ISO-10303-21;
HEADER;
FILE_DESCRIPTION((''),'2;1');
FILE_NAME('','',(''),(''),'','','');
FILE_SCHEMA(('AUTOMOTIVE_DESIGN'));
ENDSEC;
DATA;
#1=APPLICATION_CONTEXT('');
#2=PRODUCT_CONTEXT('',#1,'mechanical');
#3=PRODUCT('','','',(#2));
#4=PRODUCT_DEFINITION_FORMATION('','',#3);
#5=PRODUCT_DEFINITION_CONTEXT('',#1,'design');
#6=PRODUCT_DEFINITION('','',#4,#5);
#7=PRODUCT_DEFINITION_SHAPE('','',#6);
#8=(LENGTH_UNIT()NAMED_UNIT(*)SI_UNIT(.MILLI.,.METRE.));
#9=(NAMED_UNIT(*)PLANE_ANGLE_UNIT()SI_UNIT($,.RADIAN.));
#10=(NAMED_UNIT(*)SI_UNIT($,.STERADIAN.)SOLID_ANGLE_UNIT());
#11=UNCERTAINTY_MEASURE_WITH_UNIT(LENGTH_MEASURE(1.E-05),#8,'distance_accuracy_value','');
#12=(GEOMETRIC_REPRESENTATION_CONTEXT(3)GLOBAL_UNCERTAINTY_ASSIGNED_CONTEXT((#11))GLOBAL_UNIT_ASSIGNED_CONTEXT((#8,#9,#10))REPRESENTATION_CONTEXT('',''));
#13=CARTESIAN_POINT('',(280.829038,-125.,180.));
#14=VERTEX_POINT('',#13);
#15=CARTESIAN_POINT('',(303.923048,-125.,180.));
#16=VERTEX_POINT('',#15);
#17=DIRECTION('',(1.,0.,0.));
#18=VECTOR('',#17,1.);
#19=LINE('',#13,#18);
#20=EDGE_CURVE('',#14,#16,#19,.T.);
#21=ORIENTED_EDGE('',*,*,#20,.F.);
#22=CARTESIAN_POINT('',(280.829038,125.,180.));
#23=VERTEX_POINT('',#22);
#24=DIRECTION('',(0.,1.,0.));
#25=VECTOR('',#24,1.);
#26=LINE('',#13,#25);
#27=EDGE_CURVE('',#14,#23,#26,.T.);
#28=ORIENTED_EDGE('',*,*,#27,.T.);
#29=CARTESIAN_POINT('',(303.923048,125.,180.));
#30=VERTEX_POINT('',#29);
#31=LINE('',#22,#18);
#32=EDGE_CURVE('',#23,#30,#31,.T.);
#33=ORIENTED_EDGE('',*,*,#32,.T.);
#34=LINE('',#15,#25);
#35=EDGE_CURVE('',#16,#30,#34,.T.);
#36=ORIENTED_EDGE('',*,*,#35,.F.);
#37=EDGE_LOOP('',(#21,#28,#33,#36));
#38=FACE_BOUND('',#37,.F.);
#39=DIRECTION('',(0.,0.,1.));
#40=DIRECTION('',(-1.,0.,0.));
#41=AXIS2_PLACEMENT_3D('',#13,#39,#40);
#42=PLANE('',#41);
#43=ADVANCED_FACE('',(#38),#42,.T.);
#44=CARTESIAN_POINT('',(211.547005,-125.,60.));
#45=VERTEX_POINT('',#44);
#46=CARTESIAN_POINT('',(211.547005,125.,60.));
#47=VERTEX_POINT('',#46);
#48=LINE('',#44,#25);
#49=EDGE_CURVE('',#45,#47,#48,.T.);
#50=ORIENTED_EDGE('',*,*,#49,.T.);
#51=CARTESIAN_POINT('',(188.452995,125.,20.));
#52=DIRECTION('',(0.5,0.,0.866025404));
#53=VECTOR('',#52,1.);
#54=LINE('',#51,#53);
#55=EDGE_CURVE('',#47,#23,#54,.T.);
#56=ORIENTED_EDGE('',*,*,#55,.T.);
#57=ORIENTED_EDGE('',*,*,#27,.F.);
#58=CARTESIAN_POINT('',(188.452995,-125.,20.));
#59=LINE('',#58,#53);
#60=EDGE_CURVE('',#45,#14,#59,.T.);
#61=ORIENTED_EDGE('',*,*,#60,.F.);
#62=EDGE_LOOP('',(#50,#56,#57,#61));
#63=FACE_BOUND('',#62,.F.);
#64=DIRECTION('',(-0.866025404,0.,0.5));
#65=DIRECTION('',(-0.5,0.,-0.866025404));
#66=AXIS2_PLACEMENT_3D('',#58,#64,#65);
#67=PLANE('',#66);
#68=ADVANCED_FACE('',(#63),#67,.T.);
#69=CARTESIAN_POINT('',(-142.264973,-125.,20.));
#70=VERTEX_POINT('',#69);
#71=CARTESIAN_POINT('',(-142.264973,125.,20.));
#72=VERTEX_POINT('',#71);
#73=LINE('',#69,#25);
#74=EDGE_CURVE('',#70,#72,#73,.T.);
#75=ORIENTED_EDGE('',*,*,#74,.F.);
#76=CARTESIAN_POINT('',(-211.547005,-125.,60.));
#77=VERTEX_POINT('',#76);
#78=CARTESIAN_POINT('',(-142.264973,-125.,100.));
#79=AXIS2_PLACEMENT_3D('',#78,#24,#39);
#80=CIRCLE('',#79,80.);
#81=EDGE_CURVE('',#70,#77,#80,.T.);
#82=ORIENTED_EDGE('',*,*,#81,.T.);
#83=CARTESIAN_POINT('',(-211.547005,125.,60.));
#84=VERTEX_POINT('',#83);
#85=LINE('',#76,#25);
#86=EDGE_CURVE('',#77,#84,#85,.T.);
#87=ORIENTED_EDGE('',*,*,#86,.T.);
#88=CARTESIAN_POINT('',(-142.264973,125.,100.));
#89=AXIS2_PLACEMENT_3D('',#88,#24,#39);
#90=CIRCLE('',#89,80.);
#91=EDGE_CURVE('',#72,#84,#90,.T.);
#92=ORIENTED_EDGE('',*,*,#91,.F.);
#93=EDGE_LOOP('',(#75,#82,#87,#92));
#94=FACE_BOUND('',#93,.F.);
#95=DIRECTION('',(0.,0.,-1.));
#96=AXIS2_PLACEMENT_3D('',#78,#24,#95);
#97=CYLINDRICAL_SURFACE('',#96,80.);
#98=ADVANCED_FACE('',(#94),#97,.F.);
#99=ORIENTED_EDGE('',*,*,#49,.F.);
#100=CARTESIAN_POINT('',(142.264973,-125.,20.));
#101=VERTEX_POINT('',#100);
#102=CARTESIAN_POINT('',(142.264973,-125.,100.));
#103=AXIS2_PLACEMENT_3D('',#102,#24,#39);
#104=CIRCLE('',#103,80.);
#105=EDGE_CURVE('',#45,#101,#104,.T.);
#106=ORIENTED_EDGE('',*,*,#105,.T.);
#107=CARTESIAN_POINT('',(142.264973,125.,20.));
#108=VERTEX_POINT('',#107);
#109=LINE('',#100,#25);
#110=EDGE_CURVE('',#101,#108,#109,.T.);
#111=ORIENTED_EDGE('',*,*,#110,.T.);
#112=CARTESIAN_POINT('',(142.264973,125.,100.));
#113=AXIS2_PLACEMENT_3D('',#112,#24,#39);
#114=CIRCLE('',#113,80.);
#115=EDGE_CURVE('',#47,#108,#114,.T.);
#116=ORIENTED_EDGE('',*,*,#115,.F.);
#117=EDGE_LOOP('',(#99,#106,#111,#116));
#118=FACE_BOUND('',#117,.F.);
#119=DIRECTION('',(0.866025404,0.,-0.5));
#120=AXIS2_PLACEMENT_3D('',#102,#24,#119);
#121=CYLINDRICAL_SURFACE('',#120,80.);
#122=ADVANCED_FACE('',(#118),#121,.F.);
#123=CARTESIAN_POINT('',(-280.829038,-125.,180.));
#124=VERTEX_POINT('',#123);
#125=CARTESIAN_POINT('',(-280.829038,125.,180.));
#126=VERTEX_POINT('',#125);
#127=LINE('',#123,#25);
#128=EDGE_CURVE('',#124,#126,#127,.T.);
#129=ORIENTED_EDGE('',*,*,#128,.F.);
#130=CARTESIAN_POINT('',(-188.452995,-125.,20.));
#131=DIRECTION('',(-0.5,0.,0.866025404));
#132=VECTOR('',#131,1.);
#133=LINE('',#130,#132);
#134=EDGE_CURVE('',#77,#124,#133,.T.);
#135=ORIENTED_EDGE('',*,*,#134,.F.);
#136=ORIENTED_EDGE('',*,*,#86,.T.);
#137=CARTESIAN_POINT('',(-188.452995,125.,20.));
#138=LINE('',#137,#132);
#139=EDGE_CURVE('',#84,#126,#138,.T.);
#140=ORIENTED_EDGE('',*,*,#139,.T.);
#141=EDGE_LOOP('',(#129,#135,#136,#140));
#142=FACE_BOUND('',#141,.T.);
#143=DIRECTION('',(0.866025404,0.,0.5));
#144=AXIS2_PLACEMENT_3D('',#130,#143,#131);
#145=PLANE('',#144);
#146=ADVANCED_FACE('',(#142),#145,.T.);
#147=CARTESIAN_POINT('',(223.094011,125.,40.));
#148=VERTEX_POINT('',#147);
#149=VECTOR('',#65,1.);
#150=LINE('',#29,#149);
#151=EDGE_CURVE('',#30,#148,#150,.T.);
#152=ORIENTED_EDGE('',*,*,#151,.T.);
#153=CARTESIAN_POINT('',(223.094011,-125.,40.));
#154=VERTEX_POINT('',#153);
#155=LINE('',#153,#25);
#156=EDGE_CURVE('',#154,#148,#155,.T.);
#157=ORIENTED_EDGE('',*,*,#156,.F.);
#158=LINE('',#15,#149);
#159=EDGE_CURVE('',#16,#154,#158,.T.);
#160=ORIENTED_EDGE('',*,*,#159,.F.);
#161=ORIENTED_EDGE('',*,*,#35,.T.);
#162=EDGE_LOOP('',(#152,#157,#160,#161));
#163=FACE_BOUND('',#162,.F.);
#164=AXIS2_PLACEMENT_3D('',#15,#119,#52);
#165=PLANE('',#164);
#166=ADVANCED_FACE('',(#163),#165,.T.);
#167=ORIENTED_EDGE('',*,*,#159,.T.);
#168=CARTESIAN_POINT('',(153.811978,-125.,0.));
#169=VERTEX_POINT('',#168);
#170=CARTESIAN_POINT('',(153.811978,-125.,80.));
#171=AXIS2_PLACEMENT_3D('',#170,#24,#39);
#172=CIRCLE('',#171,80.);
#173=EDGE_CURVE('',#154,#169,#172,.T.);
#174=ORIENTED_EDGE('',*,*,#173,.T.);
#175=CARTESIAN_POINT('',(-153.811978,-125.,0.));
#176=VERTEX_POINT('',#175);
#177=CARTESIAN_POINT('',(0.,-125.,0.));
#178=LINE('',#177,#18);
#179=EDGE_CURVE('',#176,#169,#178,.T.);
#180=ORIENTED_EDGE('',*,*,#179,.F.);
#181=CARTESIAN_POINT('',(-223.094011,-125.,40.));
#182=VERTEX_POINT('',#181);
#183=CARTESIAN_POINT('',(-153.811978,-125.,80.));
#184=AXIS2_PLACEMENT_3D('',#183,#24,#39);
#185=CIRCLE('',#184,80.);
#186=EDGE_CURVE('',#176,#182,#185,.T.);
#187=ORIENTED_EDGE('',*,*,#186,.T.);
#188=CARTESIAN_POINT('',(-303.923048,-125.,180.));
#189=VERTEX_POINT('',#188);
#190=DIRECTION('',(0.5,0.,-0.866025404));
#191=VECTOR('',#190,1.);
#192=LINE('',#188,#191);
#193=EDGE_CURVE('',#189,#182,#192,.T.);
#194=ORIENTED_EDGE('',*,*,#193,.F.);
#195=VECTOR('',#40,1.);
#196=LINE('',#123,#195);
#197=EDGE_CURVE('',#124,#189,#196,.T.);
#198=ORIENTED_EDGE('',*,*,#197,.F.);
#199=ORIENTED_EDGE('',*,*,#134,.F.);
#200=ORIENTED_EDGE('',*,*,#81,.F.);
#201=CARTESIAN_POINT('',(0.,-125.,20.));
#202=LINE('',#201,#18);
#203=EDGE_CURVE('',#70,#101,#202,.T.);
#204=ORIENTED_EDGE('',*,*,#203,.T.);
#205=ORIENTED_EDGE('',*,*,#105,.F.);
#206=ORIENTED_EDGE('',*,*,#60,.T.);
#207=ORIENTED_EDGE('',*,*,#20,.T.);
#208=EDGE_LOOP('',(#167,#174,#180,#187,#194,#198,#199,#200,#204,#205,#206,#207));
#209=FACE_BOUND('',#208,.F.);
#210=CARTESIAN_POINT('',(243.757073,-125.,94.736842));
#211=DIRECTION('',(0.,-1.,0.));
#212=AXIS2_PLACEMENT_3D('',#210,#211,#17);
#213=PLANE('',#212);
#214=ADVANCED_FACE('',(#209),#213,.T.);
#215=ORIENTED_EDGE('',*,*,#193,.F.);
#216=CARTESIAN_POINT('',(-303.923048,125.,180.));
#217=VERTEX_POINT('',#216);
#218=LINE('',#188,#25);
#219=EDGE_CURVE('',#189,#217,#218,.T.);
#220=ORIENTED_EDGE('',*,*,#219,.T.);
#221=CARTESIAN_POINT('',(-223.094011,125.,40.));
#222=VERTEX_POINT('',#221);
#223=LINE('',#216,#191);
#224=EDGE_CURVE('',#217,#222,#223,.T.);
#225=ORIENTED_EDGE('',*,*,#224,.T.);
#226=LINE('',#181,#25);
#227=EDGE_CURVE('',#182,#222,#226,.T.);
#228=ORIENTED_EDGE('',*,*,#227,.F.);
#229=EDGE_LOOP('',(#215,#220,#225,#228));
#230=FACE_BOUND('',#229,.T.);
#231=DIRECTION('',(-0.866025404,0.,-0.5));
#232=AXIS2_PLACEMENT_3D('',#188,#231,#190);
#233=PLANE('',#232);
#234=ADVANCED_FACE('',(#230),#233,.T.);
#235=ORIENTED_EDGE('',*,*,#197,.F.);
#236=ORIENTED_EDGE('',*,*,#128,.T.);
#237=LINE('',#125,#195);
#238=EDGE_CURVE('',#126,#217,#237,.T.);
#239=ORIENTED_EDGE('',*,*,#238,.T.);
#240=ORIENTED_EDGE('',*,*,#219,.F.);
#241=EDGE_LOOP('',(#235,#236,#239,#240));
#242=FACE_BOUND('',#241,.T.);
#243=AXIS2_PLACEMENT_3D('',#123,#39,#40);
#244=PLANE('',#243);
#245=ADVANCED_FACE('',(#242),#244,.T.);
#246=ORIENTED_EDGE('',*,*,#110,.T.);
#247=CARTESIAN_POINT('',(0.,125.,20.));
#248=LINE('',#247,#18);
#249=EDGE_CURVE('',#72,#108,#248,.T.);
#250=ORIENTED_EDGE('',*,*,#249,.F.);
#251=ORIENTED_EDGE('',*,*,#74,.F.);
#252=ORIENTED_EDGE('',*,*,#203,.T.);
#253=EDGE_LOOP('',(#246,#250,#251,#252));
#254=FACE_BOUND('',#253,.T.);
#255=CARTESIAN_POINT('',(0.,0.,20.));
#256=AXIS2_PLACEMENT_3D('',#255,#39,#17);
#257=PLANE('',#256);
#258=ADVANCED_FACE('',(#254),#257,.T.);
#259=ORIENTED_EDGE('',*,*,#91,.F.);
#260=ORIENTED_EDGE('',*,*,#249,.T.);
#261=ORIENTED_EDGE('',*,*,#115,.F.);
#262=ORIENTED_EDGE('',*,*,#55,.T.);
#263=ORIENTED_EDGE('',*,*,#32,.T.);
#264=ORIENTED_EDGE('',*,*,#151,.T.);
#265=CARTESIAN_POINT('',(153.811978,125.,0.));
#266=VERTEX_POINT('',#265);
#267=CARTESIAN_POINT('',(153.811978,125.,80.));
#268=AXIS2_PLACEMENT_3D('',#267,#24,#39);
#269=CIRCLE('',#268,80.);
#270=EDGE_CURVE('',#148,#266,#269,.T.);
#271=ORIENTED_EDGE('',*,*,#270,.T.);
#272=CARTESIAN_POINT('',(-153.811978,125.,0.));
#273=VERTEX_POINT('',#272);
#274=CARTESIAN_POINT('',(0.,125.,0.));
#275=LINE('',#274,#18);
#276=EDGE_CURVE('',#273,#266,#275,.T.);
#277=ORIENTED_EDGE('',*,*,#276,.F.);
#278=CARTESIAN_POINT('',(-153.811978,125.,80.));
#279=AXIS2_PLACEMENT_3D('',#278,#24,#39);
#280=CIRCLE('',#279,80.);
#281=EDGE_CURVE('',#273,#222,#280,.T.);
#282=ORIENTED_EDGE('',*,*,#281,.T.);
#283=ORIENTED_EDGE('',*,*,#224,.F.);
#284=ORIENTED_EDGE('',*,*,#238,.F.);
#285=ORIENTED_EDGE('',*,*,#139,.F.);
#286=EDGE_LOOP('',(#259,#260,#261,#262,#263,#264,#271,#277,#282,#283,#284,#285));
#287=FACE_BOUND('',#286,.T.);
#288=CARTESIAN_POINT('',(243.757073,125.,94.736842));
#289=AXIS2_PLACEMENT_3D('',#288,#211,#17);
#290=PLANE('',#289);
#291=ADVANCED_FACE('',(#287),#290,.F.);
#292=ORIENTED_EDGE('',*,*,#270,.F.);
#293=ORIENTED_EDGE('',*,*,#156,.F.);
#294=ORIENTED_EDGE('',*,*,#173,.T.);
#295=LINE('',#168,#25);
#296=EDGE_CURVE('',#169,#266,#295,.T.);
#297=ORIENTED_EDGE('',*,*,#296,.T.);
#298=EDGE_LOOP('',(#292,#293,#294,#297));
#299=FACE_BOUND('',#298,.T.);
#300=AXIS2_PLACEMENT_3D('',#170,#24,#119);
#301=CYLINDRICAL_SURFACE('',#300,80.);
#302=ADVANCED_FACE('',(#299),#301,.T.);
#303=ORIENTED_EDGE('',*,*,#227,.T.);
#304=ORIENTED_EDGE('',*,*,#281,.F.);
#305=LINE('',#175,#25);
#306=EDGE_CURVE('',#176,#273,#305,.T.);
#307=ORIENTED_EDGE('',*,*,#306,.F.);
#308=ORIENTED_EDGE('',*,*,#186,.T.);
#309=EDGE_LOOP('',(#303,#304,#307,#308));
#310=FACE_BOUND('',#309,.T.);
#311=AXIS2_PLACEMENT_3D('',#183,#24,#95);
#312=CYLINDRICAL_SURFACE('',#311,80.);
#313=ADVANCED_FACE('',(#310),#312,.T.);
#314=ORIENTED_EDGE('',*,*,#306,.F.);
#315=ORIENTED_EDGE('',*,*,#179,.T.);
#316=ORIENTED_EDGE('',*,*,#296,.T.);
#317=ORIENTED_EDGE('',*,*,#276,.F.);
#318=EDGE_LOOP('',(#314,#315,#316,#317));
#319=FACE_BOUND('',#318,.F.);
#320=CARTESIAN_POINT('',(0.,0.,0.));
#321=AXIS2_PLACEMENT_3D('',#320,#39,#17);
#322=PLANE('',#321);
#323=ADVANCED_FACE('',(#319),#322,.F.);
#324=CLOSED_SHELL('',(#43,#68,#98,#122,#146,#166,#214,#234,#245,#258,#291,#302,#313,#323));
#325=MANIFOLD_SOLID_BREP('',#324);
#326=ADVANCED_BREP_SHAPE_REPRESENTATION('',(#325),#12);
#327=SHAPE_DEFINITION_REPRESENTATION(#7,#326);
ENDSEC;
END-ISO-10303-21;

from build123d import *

# Parameters (mm, degrees)
F0_W     = 400
F0_H     = 250
F1_DEPTH = 20
F3_DEPTH = 250
F4_R     = 80


# Not quite as in the source:
# - a pattern or mirror of a feature is missing from the dataset's text; its kind, count and spacing are read off the source's solid


with BuildPart() as f1:
    # F0 (on Top) → F1 (new body)
    with BuildSketch(Plane.XY):
        Rectangle(F0_W, F0_H)
    extrude(amount=F1_DEPTH)

    # F2 (on face) → F3 (join, through all)
    with BuildSketch(Plane.XZ.offset(125)):
        Polygon((-303.9230484541, 180), (-200, 0), (-188.4529946162, 20), (-280.8290376865, 180), align=None)
    f3 = extrude(amount=-F3_DEPTH)

    # F3_copies: F3 across plane
    add(f3.mirror(Plane(origin=(0, 0, 0), x_dir=(0, 0, 1), z_dir=(1, 0, 0))))

    # F4
    f4_edges = [f1.edges().sort_by_distance(p)[0] for p in [
        (-188.452995, 0, 20),
        (-200, 0, 0),
        (188.452995, 0, 20),
        (200, 0, 0),
    ]]
    fillet(f4_edges, radius=F4_R)


solid = f1.part
